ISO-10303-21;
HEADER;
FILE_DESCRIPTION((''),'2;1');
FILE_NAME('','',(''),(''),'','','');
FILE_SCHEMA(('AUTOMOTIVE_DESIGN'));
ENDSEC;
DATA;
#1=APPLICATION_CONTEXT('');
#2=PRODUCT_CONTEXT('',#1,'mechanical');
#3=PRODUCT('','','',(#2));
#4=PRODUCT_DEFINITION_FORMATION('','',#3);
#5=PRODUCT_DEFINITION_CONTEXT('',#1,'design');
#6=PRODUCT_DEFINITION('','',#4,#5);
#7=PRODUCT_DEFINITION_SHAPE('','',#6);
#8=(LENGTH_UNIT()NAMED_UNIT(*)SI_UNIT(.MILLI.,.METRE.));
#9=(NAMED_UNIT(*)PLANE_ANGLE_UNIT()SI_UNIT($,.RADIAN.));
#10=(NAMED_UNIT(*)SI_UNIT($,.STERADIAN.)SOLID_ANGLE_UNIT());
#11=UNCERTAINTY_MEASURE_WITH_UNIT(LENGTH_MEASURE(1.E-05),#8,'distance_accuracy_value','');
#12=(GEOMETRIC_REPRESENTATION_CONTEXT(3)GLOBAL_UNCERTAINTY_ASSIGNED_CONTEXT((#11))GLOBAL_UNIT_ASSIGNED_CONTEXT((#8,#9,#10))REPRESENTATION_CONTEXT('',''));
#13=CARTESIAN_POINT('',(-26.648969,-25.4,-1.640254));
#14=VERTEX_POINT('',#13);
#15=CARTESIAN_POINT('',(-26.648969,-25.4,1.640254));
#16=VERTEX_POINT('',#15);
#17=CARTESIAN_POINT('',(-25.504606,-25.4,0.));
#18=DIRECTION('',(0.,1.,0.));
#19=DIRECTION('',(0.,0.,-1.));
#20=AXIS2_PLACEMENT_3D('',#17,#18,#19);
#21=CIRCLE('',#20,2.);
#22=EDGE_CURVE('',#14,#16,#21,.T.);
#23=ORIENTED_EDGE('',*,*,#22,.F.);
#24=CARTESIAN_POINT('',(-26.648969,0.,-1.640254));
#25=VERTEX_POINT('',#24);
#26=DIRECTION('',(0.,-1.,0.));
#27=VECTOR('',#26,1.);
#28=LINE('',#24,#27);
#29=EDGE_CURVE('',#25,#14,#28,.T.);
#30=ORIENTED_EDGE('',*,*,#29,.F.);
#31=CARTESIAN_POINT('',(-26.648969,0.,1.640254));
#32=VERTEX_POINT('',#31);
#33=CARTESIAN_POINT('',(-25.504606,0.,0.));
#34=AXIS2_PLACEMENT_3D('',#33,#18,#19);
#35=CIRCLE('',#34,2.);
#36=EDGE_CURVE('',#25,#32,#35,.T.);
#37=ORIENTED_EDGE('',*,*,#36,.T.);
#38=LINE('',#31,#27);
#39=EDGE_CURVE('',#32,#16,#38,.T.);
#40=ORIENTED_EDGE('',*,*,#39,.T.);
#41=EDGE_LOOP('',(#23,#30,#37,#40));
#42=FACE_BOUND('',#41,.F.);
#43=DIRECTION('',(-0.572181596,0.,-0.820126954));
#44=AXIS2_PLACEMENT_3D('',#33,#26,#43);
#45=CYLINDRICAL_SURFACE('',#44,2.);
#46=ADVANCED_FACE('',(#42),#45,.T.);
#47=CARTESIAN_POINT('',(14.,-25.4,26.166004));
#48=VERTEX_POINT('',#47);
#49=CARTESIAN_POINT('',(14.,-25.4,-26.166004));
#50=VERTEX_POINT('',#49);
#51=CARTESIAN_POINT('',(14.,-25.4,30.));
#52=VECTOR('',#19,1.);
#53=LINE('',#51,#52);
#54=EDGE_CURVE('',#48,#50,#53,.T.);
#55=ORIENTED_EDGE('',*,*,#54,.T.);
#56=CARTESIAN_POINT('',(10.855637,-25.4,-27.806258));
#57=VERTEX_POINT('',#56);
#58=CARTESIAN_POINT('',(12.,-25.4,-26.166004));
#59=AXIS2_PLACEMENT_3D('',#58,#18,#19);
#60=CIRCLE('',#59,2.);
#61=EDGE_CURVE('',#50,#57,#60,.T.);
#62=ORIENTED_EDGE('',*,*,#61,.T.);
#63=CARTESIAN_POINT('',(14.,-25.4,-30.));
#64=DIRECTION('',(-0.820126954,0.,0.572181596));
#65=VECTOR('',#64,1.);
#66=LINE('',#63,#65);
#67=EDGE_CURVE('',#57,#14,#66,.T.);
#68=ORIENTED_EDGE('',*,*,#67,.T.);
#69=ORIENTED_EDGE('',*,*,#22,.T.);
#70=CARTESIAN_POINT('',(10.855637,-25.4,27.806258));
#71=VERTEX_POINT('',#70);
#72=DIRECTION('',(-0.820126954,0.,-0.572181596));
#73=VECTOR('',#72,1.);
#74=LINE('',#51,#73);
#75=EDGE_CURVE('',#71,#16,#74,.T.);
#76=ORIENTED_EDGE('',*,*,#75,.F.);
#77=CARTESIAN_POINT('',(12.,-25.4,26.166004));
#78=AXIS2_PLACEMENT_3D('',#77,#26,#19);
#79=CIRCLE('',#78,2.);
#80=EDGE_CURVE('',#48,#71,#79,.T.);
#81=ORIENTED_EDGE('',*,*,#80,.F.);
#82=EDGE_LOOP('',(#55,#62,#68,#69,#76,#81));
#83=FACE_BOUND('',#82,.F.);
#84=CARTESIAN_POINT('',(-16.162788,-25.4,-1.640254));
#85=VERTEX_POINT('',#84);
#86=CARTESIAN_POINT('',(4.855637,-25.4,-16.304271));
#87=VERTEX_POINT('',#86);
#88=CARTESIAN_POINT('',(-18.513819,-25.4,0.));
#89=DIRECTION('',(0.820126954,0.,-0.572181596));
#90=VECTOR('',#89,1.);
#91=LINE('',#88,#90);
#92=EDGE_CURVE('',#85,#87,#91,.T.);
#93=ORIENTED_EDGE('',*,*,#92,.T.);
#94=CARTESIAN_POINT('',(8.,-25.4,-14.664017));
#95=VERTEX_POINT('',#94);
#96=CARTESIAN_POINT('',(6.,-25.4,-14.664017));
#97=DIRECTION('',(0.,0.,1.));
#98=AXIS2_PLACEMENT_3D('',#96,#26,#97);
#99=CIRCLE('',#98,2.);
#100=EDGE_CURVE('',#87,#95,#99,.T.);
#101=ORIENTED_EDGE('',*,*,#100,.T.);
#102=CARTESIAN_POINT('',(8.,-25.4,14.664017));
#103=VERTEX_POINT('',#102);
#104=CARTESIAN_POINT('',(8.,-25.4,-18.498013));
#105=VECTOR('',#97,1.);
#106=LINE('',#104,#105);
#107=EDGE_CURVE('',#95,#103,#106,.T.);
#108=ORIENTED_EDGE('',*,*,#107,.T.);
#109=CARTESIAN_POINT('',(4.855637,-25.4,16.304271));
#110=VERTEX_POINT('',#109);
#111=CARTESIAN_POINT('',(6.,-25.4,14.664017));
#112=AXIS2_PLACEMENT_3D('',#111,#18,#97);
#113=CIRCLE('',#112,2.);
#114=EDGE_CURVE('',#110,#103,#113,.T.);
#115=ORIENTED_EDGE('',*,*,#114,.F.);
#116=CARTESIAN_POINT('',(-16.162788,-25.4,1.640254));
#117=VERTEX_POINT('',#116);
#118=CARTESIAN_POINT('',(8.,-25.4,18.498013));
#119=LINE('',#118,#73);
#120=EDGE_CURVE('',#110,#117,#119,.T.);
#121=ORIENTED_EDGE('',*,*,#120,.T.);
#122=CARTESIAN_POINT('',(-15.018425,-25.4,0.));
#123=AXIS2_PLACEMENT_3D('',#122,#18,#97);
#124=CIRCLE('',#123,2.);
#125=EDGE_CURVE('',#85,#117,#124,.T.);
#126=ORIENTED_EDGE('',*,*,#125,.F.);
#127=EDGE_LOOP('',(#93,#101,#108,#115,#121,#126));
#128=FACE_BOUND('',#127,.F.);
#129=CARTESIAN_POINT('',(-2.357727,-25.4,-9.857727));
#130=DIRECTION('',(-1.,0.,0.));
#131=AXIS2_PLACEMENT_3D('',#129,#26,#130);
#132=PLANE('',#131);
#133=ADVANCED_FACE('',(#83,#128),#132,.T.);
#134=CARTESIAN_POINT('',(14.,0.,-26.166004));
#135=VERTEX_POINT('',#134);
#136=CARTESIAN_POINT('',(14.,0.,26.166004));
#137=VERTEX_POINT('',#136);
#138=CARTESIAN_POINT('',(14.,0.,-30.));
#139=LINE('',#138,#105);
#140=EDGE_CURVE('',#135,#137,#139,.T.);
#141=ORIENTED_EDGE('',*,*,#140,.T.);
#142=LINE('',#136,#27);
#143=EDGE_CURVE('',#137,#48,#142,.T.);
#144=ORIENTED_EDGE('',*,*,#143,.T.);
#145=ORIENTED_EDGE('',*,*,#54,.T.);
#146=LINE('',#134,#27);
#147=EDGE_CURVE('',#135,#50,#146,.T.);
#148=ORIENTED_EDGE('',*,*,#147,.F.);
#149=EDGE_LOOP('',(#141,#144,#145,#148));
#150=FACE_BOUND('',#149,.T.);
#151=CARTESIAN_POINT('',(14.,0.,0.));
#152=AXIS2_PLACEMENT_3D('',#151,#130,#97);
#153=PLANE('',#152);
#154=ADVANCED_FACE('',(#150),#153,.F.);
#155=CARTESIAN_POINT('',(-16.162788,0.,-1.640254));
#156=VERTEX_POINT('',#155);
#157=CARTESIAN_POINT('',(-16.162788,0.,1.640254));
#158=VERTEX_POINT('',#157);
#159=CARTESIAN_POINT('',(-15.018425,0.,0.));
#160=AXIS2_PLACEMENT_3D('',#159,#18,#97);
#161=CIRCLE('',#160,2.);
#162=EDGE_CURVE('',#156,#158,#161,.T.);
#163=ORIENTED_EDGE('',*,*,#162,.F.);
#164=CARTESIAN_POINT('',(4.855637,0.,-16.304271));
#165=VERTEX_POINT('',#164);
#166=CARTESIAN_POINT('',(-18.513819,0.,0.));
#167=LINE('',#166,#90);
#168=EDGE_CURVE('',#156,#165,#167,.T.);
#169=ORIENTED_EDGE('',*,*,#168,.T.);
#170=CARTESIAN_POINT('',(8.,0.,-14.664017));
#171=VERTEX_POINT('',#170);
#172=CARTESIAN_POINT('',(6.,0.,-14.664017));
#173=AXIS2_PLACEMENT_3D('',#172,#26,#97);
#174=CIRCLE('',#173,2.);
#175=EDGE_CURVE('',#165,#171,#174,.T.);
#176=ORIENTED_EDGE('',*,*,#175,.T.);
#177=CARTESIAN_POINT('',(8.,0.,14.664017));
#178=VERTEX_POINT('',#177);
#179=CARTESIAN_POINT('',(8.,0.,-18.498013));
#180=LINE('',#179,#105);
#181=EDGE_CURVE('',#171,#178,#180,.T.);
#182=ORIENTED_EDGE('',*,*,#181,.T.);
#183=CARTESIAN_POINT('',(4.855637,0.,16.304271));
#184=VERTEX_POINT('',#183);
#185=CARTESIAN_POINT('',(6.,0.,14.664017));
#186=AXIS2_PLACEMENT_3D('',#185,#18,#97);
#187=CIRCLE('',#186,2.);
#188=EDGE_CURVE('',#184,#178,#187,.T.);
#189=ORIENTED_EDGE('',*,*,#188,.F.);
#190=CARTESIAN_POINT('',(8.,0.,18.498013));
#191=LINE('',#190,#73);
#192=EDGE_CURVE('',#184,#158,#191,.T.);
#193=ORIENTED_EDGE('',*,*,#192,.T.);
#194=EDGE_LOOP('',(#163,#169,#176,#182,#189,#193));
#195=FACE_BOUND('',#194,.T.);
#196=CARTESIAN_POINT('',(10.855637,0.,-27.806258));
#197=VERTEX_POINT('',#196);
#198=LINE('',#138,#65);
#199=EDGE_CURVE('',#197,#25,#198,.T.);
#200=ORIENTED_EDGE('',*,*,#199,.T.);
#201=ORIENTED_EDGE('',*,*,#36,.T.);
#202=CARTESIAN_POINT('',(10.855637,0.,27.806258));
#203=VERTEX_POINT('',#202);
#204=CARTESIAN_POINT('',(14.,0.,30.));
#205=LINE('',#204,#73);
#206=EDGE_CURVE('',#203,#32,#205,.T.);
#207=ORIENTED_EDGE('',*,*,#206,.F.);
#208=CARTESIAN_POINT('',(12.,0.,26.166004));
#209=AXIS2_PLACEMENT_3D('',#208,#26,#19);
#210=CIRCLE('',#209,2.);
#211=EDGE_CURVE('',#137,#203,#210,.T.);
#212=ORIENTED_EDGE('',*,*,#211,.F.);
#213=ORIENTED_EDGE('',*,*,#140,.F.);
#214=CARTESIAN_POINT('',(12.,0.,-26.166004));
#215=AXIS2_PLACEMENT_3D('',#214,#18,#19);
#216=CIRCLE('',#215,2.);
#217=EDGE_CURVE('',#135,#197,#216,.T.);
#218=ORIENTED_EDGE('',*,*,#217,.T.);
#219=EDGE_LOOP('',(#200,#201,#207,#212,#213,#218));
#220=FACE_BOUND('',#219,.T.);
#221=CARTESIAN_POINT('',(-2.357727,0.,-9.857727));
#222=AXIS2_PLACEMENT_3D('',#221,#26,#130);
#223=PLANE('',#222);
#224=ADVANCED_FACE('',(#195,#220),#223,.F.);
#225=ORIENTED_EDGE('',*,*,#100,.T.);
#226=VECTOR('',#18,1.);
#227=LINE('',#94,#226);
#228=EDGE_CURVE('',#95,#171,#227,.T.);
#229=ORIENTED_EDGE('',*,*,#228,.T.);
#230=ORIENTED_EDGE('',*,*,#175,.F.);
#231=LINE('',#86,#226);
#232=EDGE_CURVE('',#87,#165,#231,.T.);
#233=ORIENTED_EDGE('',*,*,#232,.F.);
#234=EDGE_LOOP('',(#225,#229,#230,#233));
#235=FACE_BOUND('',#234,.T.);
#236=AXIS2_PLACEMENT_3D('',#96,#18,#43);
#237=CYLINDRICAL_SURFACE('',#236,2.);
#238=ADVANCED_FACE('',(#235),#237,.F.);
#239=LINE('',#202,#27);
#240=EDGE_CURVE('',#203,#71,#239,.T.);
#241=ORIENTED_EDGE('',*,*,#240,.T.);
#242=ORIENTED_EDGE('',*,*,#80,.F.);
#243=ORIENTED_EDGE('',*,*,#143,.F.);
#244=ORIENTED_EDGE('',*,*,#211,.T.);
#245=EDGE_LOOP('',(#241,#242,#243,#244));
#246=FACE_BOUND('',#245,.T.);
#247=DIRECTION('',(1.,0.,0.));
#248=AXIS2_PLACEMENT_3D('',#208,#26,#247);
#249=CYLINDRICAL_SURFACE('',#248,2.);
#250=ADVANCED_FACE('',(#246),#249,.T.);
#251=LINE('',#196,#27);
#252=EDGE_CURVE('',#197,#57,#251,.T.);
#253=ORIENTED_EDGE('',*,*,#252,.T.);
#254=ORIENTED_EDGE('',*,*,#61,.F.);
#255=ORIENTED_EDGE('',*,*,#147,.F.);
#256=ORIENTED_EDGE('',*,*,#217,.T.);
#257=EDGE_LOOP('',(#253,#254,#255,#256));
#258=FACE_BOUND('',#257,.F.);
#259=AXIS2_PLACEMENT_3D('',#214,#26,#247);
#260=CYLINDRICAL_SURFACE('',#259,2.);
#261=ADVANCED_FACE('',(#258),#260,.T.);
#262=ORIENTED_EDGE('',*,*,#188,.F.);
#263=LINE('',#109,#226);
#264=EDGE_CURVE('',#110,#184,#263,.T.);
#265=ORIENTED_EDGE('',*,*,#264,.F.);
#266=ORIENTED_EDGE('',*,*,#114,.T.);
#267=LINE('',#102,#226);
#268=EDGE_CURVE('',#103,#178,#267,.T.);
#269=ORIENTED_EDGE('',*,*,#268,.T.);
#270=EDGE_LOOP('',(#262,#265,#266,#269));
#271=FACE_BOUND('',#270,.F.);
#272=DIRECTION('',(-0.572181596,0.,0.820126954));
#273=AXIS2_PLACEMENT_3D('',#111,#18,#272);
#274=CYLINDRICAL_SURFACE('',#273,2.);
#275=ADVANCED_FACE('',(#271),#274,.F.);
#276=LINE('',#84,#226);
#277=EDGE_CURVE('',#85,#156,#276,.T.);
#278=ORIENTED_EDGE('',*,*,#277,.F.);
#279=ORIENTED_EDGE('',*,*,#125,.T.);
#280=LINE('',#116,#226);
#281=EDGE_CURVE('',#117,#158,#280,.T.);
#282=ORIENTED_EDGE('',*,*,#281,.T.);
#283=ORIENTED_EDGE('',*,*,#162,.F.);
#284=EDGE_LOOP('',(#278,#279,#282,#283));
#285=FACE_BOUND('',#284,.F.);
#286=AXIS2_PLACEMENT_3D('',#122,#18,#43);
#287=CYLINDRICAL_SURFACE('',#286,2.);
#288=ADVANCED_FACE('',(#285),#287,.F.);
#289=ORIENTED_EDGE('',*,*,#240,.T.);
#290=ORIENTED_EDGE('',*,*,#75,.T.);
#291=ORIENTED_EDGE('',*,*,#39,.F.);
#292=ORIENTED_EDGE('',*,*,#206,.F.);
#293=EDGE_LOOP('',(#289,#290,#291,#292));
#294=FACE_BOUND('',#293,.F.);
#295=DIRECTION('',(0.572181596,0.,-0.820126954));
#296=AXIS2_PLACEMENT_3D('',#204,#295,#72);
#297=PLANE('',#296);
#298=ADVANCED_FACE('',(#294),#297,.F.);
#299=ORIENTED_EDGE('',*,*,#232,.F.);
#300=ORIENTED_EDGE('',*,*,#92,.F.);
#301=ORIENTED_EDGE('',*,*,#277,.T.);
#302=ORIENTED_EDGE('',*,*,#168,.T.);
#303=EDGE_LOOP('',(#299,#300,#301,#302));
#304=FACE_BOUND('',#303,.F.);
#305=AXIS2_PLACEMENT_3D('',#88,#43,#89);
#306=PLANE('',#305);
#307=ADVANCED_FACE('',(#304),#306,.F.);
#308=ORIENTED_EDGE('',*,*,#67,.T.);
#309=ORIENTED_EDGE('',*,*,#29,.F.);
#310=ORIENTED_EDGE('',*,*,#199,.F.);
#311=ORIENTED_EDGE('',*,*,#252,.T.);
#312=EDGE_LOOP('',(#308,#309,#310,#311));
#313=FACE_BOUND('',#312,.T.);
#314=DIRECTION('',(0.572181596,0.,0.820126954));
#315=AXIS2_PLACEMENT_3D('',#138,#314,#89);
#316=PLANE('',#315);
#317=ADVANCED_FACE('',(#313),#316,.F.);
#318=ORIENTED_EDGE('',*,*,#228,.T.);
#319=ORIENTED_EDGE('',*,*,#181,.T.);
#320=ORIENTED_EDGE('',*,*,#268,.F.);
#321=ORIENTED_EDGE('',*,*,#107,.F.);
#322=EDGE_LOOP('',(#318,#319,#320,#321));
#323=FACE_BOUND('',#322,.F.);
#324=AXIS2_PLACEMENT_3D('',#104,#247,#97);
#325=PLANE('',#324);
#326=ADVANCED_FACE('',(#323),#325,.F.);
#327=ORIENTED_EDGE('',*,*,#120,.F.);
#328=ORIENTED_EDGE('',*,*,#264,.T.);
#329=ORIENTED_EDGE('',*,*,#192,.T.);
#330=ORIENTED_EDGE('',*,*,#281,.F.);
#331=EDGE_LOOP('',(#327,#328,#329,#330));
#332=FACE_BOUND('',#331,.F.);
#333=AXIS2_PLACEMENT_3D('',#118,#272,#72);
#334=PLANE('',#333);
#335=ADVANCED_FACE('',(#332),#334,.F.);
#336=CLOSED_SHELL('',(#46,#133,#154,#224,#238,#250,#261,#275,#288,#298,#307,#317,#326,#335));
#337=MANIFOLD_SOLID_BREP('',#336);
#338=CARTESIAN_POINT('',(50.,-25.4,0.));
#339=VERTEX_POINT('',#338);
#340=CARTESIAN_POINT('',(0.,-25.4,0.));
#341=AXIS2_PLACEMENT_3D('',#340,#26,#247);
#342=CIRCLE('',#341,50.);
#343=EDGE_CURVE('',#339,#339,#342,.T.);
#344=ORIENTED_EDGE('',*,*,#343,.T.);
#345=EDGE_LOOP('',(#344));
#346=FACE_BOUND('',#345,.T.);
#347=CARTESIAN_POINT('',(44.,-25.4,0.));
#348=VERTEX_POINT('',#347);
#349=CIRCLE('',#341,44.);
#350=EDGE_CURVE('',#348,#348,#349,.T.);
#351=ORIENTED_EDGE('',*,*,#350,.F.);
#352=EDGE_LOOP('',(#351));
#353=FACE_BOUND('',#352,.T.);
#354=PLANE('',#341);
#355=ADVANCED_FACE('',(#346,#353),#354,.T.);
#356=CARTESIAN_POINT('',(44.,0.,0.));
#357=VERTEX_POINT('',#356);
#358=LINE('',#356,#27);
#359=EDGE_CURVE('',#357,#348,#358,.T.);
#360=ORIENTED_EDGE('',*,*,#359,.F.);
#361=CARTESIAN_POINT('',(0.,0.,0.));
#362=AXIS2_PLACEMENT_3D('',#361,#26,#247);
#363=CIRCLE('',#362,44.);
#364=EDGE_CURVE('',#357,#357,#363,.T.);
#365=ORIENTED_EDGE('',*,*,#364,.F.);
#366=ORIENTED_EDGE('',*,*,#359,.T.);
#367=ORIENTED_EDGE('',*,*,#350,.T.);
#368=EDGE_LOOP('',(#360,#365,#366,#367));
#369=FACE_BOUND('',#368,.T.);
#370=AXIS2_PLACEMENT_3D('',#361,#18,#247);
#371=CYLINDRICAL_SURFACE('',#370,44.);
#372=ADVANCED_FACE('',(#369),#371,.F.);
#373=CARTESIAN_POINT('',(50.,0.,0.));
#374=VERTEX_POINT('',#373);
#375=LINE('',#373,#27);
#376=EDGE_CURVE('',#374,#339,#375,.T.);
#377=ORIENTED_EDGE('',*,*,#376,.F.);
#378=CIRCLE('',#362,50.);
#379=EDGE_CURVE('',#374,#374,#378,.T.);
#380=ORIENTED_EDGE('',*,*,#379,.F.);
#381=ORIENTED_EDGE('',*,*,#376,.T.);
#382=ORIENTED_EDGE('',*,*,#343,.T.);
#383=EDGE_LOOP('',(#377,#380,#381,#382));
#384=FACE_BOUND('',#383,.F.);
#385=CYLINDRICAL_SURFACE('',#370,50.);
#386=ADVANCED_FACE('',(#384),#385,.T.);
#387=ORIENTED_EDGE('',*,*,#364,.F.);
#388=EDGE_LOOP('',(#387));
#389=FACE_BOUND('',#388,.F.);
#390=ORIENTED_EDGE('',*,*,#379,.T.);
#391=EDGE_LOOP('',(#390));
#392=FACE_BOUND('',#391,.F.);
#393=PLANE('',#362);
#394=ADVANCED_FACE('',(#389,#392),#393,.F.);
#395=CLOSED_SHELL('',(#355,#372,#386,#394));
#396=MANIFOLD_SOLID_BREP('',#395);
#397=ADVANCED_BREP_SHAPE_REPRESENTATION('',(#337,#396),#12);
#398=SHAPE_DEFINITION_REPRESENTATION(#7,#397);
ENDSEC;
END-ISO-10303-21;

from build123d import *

# Parameters (mm, degrees)
F0_R     = 50
F0_R_2   = 44
F1_DEPTH = 25.4
F2_DEPTH = 25.4
F5_DEPTH = 25.4
F6_R     = 2


# Not quite as in the source:
# - a feature names something its author has since deleted; it is built from what else it names


with BuildPart() as f1:
    # F0 (on Front) → F1 (new body)
    with BuildSketch(Plane.XZ):
        Circle(F0_R)
        Circle(F0_R_2, mode=Mode.SUBTRACT)
    extrude(amount=F1_DEPTH)


with BuildPart() as f2:
    # F0 (on Front) → F2 (new body)
    with BuildSketch(Plane.XZ):
        Polygon((-29, 0), (0, 0), (14, 0), (14, 30), align=None)
    extrude(amount=F2_DEPTH)

    # F3: F2 across face


with BuildPart() as f2_1:
    add(f2.part)
    add(f2.part.mirror(Plane(origin=(-7.5, -12.7, 0), x_dir=(1, 0, 0), z_dir=(0, 0, -1))))

    # F4 (on face) → F5 (cut)
    with BuildSketch(Plane.XZ.offset(25.4)):
        Polygon((8, -18.4980129885), (8, 18.4980129885), (-18.5138186169, 0), align=None)
    extrude(amount=-F5_DEPTH, mode=Mode.SUBTRACT)

    # F6
    f6_edges = [f2_1.edges().sort_by_distance(p)[0] for p in [
        (14, -12.7, -30),
        (-29, -12.7, 0),
        (14, -12.7, 30),
        (8, -12.7, 18.498013),
        (-18.513819, -12.7, 0),
        (8, -12.7, -18.498013),
    ]]
    fillet(f6_edges, radius=F6_R)


solid = Compound([f1.part, f2_1.part])
